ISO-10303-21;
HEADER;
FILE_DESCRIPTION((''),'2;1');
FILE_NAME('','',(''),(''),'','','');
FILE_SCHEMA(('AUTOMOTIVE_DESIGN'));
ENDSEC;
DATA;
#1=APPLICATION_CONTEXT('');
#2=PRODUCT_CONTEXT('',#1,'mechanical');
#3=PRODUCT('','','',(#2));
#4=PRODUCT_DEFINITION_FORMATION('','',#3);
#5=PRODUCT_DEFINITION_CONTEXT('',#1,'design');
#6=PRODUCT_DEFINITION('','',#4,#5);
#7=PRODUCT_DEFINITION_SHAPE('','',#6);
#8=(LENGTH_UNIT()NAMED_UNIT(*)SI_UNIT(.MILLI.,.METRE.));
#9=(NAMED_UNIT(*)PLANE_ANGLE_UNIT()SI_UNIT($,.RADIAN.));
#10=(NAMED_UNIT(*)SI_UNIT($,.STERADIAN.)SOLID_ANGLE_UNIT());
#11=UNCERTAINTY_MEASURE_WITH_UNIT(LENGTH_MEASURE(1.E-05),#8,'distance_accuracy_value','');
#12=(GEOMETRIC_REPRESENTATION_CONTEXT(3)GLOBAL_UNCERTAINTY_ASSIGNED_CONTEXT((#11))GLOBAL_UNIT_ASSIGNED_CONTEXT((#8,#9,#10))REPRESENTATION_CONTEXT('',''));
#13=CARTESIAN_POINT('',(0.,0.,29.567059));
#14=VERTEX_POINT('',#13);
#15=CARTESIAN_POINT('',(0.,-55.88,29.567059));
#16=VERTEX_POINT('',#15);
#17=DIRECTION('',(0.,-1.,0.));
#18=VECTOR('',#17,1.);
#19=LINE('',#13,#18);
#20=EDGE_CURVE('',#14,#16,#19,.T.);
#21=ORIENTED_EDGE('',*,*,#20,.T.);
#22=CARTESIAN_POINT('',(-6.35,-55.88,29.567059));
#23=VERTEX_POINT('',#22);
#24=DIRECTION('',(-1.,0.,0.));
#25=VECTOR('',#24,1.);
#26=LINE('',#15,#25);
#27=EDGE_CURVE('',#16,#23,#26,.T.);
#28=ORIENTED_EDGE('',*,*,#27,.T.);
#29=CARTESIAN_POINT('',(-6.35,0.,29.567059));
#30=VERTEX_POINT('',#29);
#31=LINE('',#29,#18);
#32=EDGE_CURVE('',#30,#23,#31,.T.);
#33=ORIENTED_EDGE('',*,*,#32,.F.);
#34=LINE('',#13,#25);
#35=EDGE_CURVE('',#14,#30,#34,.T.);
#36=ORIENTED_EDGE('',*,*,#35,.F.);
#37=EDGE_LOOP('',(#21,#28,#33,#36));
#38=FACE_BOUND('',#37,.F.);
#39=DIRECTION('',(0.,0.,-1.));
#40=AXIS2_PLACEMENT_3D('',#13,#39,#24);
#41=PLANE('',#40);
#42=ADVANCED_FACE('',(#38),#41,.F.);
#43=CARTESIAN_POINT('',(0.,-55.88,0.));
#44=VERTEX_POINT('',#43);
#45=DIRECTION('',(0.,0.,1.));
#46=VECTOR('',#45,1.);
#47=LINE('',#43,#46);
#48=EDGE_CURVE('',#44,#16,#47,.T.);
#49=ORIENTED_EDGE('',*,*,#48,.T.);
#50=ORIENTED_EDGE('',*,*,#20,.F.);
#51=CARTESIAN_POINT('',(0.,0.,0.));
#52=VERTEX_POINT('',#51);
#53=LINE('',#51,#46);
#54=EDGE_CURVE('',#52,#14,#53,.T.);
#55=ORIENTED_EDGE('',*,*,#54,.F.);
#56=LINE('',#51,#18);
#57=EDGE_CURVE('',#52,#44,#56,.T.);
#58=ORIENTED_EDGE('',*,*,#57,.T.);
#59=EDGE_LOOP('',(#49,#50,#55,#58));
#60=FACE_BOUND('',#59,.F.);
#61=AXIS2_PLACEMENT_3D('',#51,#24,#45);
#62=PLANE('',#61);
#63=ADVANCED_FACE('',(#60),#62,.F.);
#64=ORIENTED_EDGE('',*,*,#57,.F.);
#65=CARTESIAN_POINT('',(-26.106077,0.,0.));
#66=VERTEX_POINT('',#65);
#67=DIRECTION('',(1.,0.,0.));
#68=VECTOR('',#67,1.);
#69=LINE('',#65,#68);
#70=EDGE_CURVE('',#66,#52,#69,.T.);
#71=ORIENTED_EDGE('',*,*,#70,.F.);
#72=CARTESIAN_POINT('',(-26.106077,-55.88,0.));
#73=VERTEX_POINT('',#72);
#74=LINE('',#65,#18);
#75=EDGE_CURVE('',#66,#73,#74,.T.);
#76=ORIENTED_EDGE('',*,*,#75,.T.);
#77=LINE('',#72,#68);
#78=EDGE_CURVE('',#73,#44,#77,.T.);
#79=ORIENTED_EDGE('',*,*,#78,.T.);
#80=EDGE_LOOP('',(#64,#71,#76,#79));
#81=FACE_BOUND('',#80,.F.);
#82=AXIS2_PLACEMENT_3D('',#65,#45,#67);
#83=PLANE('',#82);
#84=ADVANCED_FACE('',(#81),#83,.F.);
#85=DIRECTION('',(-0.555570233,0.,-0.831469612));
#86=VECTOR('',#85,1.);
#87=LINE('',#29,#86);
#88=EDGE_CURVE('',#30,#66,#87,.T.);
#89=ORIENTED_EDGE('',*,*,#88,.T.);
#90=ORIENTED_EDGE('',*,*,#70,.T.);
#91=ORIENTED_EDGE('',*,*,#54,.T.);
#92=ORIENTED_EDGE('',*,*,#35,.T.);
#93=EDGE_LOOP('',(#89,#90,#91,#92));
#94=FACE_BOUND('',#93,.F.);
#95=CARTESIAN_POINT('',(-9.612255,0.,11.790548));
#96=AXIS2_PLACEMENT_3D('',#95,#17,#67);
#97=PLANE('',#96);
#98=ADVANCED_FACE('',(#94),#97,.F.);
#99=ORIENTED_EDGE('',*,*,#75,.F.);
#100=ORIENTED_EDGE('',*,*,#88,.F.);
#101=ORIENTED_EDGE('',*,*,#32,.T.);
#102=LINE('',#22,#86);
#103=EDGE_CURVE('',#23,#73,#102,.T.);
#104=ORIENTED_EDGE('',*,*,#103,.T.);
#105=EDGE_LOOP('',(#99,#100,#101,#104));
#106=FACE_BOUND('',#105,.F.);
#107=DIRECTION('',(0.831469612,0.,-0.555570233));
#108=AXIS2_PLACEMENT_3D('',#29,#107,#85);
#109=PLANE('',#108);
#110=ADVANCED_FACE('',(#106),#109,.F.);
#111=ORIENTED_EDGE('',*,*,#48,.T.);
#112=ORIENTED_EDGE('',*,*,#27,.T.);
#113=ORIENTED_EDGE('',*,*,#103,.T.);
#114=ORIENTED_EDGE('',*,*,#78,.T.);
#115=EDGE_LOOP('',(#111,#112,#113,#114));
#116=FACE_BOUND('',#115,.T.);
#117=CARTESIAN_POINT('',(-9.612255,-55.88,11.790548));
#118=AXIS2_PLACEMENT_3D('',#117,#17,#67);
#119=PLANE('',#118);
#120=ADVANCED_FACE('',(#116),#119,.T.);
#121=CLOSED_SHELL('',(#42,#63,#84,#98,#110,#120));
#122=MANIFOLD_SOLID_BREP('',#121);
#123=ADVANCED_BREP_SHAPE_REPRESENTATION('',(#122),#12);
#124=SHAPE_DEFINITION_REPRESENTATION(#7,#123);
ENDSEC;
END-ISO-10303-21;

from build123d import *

# Parameters (mm, degrees)
F1_DEPTH = 55.88


# Not quite as in the source:
# - a feature names something its author has since deleted; it is built from what else it names


with BuildPart() as f1:
    # F0 (on Front) → F1 (new body)
    with BuildSketch(Plane.XZ):
        Polygon((-26.1060774862, 0), (0, 0), (0, 29.5670594135), (-6.35, 29.5670594135), align=None)
    extrude(amount=F1_DEPTH)


solid = f1.part
